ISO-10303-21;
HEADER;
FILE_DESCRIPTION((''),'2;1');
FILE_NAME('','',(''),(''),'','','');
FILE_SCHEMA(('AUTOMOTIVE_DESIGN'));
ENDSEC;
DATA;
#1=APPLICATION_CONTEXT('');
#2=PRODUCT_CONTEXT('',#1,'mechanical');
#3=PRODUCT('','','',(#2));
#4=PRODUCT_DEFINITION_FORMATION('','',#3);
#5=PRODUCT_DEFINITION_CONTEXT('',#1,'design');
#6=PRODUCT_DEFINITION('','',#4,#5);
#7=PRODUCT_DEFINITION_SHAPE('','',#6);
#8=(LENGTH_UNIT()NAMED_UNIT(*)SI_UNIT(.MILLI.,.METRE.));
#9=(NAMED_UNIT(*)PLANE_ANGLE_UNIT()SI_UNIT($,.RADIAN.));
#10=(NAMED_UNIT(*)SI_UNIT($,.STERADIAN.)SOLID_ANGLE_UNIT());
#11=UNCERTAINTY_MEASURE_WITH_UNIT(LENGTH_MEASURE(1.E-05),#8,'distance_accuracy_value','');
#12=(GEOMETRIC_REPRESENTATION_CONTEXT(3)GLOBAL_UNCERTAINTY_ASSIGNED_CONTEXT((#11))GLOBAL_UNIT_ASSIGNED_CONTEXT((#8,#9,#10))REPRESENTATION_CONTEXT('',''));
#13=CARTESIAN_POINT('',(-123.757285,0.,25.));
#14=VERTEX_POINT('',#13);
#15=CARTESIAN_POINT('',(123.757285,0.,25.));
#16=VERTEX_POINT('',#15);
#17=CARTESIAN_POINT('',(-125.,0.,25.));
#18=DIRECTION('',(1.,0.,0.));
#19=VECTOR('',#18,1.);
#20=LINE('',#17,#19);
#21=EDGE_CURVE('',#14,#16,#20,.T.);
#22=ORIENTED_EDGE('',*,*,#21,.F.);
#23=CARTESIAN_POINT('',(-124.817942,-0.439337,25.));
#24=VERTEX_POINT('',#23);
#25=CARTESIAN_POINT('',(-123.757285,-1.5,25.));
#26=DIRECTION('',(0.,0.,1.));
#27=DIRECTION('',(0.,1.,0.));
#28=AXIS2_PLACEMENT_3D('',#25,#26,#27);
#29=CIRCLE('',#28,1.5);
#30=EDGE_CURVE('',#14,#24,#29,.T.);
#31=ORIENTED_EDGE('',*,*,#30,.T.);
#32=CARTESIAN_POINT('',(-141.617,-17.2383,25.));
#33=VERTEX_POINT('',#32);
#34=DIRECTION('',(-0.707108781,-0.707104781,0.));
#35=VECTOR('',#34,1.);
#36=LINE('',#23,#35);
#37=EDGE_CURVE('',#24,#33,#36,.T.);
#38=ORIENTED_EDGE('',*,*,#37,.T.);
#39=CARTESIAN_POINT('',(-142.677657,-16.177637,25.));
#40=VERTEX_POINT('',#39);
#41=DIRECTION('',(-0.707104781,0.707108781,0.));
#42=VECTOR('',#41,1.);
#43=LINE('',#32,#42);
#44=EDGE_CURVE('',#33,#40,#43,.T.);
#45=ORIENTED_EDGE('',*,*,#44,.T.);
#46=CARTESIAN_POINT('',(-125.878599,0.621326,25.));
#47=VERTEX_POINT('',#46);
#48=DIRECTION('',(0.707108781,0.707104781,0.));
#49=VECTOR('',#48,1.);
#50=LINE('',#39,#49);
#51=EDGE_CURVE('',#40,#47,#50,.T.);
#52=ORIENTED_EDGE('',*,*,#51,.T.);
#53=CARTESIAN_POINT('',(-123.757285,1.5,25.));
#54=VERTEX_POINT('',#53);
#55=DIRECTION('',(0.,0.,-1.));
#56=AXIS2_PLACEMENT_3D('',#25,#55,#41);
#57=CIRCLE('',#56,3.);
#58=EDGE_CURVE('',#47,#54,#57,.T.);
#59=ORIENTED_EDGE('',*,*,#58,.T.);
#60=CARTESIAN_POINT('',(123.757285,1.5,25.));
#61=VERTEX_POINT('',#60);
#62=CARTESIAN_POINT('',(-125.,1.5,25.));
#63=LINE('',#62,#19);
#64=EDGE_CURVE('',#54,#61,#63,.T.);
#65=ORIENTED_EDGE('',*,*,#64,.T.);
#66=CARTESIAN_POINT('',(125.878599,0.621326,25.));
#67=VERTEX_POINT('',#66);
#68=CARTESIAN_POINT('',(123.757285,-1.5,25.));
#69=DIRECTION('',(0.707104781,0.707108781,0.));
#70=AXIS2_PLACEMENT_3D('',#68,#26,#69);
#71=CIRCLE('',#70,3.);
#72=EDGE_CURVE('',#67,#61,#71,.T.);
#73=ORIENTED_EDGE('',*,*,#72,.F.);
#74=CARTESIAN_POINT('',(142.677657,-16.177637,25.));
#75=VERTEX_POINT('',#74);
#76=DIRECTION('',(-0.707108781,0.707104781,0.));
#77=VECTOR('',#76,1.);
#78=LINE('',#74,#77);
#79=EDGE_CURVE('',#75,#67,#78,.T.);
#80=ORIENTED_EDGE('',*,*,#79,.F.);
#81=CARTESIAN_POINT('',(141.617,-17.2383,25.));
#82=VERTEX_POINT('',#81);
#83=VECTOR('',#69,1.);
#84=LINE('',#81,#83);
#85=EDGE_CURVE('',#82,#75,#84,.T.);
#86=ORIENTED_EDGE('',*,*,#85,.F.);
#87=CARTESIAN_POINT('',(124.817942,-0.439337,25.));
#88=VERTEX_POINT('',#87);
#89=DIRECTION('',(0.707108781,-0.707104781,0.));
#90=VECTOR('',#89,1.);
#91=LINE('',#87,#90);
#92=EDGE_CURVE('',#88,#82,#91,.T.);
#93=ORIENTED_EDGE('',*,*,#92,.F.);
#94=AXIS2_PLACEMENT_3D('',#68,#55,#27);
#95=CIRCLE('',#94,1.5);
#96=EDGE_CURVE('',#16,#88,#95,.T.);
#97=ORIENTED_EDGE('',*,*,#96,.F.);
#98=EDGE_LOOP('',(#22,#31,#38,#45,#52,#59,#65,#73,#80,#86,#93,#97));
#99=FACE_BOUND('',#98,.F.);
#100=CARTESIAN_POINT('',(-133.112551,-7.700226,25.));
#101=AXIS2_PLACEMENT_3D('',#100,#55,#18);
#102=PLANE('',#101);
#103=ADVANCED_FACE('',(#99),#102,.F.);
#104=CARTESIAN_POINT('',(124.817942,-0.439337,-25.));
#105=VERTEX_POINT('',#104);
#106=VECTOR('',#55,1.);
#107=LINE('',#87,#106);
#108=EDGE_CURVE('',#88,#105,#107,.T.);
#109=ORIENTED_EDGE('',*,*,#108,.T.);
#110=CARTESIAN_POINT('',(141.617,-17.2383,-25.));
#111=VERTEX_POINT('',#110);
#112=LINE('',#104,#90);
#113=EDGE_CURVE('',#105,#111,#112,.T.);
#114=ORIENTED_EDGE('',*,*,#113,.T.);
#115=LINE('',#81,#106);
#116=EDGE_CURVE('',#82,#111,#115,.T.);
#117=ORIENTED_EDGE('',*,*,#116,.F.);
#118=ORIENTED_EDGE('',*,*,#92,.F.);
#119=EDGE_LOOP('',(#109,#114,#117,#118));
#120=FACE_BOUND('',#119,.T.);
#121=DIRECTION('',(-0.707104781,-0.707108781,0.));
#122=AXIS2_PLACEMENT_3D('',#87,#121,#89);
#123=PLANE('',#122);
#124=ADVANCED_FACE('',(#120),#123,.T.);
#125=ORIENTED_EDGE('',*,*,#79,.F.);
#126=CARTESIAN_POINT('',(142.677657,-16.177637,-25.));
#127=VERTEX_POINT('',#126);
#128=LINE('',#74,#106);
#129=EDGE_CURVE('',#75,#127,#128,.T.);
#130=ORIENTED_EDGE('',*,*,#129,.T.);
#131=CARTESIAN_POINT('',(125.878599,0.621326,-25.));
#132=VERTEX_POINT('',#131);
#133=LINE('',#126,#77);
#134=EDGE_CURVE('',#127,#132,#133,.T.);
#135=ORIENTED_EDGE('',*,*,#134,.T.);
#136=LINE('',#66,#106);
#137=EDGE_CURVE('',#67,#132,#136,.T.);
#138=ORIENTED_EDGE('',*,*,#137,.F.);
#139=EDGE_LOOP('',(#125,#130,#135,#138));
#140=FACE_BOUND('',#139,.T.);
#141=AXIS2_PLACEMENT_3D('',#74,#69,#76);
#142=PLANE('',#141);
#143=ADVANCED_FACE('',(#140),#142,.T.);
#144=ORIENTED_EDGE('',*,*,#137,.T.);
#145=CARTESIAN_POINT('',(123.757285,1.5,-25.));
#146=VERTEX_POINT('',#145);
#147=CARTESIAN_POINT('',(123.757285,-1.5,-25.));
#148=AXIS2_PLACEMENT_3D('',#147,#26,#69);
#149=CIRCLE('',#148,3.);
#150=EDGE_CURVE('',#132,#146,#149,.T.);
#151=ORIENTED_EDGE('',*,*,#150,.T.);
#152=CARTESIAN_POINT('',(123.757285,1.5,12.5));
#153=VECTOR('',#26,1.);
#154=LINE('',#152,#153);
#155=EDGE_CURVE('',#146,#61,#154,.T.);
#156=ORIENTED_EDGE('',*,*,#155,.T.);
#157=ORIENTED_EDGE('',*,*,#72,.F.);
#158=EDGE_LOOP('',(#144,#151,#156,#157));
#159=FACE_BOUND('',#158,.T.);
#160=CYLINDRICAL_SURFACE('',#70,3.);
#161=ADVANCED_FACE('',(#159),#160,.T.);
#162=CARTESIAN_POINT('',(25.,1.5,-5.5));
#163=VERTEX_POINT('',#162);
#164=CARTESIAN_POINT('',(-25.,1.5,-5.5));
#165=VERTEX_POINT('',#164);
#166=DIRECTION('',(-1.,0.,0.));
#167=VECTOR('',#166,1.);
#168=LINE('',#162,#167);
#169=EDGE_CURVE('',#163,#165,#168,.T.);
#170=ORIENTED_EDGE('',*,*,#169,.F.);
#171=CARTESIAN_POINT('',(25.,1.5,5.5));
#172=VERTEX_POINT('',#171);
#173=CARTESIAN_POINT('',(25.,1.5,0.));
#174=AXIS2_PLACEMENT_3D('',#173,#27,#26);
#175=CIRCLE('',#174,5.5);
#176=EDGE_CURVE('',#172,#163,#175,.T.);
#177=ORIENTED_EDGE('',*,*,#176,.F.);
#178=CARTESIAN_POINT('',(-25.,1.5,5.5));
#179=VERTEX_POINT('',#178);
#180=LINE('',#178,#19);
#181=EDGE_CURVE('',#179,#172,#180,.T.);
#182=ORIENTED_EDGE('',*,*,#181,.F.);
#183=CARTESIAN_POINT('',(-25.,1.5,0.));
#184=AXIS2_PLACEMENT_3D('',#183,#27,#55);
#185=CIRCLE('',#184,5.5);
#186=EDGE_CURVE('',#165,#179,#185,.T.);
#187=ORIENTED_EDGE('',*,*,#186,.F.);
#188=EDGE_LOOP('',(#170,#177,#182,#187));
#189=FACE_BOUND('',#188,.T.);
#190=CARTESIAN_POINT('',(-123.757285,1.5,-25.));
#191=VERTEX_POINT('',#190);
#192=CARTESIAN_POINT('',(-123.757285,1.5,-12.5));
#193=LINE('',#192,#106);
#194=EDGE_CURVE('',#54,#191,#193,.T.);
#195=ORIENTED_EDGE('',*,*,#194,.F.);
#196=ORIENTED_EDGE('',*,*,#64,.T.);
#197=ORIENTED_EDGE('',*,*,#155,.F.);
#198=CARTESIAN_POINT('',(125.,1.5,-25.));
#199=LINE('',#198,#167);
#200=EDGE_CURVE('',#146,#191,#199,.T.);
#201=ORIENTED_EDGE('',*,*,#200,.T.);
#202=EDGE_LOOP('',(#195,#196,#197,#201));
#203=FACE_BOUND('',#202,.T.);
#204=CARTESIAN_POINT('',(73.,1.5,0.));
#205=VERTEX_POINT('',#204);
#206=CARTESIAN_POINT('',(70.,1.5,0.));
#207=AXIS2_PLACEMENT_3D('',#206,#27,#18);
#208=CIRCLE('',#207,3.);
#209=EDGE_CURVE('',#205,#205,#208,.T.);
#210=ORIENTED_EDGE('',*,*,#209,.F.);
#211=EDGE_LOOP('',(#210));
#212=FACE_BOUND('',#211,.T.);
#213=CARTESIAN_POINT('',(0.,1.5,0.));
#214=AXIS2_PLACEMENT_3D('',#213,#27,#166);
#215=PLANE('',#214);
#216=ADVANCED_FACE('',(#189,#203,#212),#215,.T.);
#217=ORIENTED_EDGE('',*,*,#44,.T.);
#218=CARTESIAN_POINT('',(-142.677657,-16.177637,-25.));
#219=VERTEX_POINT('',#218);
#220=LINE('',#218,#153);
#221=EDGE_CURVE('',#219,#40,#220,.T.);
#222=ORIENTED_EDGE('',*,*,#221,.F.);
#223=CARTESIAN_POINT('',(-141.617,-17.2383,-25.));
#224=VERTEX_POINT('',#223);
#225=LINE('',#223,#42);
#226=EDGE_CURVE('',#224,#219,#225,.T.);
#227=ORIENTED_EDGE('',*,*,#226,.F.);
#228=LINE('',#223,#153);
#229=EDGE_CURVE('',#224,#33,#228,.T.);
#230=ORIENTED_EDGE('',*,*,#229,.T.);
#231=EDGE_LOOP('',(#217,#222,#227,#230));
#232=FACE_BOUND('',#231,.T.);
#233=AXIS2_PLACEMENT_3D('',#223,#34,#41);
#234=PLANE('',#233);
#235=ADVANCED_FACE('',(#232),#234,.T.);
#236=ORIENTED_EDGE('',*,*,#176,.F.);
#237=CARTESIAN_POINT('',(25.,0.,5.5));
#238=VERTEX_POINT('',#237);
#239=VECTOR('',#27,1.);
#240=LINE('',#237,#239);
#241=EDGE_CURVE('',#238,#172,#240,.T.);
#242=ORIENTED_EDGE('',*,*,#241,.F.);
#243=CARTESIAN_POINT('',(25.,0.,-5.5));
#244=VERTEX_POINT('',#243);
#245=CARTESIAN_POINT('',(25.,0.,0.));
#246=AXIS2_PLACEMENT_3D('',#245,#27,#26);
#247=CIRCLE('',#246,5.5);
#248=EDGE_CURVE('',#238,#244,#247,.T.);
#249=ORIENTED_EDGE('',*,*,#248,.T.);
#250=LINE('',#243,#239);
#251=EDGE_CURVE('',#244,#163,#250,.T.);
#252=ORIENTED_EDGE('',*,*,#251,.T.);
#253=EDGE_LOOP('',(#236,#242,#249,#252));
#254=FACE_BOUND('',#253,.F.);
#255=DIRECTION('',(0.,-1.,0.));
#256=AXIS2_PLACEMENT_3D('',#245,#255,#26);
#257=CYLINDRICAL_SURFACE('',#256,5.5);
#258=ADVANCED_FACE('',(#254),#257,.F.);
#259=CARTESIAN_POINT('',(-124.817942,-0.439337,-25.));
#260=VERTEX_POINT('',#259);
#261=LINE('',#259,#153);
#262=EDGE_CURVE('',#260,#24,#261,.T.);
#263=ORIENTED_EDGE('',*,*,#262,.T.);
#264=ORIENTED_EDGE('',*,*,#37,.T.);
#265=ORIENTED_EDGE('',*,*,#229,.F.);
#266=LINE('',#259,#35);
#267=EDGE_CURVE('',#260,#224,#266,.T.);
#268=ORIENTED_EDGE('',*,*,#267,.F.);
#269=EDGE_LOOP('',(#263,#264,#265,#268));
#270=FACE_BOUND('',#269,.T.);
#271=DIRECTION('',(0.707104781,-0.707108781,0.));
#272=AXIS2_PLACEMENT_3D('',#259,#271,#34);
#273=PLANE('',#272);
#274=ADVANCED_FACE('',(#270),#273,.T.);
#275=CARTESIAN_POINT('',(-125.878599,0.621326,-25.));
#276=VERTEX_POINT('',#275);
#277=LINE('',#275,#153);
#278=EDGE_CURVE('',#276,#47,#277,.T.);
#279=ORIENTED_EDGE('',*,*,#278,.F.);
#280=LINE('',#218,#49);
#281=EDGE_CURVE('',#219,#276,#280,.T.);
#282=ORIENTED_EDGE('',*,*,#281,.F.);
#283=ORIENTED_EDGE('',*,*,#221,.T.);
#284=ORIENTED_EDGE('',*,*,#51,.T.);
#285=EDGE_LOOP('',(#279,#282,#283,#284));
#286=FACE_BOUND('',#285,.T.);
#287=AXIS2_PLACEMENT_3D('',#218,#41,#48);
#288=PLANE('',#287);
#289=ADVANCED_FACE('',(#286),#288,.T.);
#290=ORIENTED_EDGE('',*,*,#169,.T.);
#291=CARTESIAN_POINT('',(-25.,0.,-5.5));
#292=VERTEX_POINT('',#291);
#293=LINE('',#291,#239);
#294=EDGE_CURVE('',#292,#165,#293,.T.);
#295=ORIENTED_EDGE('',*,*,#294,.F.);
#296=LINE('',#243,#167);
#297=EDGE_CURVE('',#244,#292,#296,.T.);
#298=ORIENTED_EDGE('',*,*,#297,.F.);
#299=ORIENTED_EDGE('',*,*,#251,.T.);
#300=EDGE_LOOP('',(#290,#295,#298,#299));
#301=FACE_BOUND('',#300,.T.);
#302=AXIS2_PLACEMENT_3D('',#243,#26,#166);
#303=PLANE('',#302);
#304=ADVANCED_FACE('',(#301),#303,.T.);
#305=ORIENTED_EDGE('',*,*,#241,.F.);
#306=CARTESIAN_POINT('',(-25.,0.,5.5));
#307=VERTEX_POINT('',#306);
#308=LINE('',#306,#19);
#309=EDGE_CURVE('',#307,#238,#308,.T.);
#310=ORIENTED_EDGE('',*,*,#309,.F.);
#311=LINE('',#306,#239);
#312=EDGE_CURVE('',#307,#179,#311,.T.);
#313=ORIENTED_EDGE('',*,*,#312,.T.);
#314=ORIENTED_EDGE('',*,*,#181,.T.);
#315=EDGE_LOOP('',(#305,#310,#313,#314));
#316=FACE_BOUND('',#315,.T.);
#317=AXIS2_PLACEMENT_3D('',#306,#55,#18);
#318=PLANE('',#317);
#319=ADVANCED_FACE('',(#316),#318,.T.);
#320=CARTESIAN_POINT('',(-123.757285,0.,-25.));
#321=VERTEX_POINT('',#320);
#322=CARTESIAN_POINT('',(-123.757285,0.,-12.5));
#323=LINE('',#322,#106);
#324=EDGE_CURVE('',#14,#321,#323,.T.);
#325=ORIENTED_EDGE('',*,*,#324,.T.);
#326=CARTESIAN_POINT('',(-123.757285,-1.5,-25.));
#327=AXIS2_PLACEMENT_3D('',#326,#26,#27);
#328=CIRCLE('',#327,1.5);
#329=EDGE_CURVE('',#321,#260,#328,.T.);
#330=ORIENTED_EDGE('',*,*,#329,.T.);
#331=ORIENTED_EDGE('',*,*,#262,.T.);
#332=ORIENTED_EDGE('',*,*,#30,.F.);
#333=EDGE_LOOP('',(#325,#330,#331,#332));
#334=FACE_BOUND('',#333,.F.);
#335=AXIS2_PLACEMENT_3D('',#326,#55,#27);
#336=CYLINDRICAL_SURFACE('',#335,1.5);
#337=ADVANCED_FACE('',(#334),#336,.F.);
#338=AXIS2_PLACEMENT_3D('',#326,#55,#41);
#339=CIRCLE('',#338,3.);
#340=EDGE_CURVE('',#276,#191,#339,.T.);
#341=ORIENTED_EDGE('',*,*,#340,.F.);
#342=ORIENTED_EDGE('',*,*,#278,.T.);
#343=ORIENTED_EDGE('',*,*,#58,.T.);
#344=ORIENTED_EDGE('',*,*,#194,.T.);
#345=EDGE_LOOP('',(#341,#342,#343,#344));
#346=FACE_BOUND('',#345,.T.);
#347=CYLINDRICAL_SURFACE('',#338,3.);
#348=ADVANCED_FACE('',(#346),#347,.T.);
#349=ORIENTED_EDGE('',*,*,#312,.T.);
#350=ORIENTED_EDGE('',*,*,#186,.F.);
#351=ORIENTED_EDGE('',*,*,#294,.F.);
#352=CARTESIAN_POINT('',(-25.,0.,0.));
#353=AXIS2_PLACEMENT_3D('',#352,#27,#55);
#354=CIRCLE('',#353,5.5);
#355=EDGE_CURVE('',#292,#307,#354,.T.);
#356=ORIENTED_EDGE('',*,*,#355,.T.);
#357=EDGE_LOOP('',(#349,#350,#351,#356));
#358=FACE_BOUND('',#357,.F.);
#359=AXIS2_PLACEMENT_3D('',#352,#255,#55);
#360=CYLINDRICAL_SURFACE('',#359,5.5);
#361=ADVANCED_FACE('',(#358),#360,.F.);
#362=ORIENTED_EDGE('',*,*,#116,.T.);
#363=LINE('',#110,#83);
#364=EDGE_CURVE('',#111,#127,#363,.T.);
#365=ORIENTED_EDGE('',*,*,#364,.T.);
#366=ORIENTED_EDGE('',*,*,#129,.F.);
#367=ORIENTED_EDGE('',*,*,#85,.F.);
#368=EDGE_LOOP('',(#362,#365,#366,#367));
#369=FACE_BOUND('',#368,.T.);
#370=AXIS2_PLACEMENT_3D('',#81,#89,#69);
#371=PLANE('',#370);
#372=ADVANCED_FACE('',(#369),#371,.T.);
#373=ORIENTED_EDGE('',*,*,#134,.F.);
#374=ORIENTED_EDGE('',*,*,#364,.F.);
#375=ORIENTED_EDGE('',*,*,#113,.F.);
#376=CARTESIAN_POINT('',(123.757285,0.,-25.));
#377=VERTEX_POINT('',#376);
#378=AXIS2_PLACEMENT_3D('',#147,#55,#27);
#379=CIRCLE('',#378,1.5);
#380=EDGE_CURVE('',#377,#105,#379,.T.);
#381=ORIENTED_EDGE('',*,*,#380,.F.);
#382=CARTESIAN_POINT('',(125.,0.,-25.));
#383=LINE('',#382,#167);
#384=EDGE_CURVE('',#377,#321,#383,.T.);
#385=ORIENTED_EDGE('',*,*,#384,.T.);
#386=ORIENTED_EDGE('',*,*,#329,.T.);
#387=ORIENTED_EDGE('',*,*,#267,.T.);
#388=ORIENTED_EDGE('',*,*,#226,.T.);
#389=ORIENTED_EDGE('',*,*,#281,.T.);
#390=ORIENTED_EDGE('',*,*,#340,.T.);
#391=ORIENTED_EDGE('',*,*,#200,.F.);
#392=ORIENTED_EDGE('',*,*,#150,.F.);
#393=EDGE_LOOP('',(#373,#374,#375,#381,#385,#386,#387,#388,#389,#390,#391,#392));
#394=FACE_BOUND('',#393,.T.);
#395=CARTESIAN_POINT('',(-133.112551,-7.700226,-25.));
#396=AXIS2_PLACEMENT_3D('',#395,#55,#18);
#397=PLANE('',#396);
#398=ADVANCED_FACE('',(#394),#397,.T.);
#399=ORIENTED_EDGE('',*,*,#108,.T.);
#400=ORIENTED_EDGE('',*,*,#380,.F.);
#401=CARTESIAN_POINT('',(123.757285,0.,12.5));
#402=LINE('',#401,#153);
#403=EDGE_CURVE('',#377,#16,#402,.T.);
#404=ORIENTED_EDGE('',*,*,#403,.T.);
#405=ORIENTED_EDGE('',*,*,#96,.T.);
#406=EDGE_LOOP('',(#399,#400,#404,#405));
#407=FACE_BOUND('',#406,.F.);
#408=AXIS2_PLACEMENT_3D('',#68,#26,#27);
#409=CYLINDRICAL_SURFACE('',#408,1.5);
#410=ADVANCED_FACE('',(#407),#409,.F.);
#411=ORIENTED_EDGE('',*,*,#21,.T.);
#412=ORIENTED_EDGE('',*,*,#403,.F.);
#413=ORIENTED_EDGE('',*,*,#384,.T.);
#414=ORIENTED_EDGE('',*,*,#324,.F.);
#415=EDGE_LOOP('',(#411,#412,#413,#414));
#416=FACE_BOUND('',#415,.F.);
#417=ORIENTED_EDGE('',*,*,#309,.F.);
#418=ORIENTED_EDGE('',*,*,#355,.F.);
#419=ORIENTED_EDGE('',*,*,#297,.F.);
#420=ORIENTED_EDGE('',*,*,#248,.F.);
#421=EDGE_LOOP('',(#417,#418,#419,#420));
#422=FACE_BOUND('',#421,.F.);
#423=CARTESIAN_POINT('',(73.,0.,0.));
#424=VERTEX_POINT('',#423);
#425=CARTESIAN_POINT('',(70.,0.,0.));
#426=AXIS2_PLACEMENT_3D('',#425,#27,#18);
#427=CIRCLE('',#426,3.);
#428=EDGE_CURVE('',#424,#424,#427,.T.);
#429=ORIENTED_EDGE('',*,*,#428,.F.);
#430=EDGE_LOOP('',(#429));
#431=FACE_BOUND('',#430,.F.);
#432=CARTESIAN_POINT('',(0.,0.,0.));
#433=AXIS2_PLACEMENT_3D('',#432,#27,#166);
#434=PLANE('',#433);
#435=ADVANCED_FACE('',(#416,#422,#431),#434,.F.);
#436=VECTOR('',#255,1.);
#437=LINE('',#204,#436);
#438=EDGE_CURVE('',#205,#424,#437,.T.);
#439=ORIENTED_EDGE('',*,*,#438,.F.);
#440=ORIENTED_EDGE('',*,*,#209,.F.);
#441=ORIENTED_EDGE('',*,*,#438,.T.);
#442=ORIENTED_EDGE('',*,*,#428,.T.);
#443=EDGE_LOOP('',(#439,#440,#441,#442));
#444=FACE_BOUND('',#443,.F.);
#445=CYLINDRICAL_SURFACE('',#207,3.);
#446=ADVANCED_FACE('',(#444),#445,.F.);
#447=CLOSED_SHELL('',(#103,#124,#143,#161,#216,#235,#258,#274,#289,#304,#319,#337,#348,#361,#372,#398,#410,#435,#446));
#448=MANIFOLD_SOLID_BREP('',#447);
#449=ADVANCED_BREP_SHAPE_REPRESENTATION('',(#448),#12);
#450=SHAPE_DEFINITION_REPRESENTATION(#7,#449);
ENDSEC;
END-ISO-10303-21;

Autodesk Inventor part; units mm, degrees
ref_plane "YZ Plane" through (0, 0, 0) normal (1, 0, 0) x (0, 1, 0)
ref_plane "XZ Plane" through (0, 0, 0) normal (0, 1, 0) x (-1, 0, 0)
ref_plane "XY Plane" through (0, 0, 0) normal (0, 0, 1) x (1, 0, 0)
sketch "Sketch4" plane through (0, 0, 0) normal (0, 1, 0) x (-1, 0, 0)
  line L0 (125, 25) -> (-125, 25)
  line L1 (-125, 25) -> (-125, -25)
  line L2 (-125, -25) -> (125, -25)
  line L3 (125, -25) -> (125, 25)
  line L4 (125, 25) -> (-125, -25) construction
  line L5 (-125, 25) -> (125, -25) construction
  line L6 (25, 0) -> (-25, 0) construction
  line L7 (25, 5.5) -> (-25, 5.5)
  line L8 (-25, -5.5) -> (25, -5.5)
  arc A0 (25, -5.5) -> (25, 5.5) centre (25, 0) ccw
  arc A1 (-25, 5.5) -> (-25, -5.5) centre (-25, 0) ccw
  point P0 (0, 0)
  point P1 (0, 0)
  dimension "d17" = 250
  dimension "d18" = 50
  dimension "d19" = 50
  dimension "d20" = 11
extrude "Plate3" add sketch "Sketch4" along normal blind 1.5
sketch "Sketch6" plane through (-123.9393, 0.4393, -25) normal (-0.7071068, 0.7071068, 0) x (-0.7071068, -0.7071068, 0)
  line L0 (0, 50) -> (0, 0)
  line L1 (0, 0) -> (25, 0)
  line L2 (25, 0) -> (25, 50)
  line L3 (25, 50) -> (0, 50)
edge flange "Flange3" height 25 angle 45 thickness 1.5 bend radius 1.5 thickness toward (-0.7071068, 0.7071068, 0) relief tear relief width 1.5 relief depth 0.75 corner gap 1.5 corner form 0 edges at (-125, 0, 0) (125, 0, 0) wall of the first edge with corners at (-123.9393, 0.4393, 25) (-123.9393, 0.4393, -25) (-141.617, -17.2383, -25) (-141.617, -17.2383, 25)
bend "Bend3"
corner "Corner3"
sketch "Sketch7" plane through (0, 1.5, 0) normal (0, 1, 0) x (1, 0, 0)
  circle A0 centre (70, 0) radius 3
  point P0 (0, 0)
  dimension "d43" = 70
  dimension "d44" = 6
extrude "Cut2" cut sketch "Sketch7" against normal blind 1.5
equation "\"d41\" = Thickness"
equation "\"d2\" = Thickness"
equation "\"d31\" = BendReliefWidth"
equation "\"d32\" = BendReliefDepth"
equation "\"d33\" = MinimumRemnant"
equation "\"d34\" = TransitionRadius"
equation "\"d37\" = BendRadius"
equation "\"d38\" = CornerReliefSize"
equation "\"d39\" = GapSize"
equation "\"d40\" = JacobiRadiusSize"
equation "\"BendRadius\" = Thickness"
equation "\"BendReliefWidth\" = Thickness"
equation "\"BendReliefDepth\" = 0.5 * Thickness"
equation "\"CornerReliefSize\" = 4 * Thickness"
equation "\"MinimumRemnant\" = 2 * Thickness"
equation "\"TransitionRadius\" = BendRadius"
equation "\"JacobiRadiusSize\" = BendRadius"
equation "\"GapSize\" = Thickness"
equation "\"Thickness\" = 1.5"
properties part number "2309HCMUTE-CDT23_TAY-GAT" material "Stainless Steel"
